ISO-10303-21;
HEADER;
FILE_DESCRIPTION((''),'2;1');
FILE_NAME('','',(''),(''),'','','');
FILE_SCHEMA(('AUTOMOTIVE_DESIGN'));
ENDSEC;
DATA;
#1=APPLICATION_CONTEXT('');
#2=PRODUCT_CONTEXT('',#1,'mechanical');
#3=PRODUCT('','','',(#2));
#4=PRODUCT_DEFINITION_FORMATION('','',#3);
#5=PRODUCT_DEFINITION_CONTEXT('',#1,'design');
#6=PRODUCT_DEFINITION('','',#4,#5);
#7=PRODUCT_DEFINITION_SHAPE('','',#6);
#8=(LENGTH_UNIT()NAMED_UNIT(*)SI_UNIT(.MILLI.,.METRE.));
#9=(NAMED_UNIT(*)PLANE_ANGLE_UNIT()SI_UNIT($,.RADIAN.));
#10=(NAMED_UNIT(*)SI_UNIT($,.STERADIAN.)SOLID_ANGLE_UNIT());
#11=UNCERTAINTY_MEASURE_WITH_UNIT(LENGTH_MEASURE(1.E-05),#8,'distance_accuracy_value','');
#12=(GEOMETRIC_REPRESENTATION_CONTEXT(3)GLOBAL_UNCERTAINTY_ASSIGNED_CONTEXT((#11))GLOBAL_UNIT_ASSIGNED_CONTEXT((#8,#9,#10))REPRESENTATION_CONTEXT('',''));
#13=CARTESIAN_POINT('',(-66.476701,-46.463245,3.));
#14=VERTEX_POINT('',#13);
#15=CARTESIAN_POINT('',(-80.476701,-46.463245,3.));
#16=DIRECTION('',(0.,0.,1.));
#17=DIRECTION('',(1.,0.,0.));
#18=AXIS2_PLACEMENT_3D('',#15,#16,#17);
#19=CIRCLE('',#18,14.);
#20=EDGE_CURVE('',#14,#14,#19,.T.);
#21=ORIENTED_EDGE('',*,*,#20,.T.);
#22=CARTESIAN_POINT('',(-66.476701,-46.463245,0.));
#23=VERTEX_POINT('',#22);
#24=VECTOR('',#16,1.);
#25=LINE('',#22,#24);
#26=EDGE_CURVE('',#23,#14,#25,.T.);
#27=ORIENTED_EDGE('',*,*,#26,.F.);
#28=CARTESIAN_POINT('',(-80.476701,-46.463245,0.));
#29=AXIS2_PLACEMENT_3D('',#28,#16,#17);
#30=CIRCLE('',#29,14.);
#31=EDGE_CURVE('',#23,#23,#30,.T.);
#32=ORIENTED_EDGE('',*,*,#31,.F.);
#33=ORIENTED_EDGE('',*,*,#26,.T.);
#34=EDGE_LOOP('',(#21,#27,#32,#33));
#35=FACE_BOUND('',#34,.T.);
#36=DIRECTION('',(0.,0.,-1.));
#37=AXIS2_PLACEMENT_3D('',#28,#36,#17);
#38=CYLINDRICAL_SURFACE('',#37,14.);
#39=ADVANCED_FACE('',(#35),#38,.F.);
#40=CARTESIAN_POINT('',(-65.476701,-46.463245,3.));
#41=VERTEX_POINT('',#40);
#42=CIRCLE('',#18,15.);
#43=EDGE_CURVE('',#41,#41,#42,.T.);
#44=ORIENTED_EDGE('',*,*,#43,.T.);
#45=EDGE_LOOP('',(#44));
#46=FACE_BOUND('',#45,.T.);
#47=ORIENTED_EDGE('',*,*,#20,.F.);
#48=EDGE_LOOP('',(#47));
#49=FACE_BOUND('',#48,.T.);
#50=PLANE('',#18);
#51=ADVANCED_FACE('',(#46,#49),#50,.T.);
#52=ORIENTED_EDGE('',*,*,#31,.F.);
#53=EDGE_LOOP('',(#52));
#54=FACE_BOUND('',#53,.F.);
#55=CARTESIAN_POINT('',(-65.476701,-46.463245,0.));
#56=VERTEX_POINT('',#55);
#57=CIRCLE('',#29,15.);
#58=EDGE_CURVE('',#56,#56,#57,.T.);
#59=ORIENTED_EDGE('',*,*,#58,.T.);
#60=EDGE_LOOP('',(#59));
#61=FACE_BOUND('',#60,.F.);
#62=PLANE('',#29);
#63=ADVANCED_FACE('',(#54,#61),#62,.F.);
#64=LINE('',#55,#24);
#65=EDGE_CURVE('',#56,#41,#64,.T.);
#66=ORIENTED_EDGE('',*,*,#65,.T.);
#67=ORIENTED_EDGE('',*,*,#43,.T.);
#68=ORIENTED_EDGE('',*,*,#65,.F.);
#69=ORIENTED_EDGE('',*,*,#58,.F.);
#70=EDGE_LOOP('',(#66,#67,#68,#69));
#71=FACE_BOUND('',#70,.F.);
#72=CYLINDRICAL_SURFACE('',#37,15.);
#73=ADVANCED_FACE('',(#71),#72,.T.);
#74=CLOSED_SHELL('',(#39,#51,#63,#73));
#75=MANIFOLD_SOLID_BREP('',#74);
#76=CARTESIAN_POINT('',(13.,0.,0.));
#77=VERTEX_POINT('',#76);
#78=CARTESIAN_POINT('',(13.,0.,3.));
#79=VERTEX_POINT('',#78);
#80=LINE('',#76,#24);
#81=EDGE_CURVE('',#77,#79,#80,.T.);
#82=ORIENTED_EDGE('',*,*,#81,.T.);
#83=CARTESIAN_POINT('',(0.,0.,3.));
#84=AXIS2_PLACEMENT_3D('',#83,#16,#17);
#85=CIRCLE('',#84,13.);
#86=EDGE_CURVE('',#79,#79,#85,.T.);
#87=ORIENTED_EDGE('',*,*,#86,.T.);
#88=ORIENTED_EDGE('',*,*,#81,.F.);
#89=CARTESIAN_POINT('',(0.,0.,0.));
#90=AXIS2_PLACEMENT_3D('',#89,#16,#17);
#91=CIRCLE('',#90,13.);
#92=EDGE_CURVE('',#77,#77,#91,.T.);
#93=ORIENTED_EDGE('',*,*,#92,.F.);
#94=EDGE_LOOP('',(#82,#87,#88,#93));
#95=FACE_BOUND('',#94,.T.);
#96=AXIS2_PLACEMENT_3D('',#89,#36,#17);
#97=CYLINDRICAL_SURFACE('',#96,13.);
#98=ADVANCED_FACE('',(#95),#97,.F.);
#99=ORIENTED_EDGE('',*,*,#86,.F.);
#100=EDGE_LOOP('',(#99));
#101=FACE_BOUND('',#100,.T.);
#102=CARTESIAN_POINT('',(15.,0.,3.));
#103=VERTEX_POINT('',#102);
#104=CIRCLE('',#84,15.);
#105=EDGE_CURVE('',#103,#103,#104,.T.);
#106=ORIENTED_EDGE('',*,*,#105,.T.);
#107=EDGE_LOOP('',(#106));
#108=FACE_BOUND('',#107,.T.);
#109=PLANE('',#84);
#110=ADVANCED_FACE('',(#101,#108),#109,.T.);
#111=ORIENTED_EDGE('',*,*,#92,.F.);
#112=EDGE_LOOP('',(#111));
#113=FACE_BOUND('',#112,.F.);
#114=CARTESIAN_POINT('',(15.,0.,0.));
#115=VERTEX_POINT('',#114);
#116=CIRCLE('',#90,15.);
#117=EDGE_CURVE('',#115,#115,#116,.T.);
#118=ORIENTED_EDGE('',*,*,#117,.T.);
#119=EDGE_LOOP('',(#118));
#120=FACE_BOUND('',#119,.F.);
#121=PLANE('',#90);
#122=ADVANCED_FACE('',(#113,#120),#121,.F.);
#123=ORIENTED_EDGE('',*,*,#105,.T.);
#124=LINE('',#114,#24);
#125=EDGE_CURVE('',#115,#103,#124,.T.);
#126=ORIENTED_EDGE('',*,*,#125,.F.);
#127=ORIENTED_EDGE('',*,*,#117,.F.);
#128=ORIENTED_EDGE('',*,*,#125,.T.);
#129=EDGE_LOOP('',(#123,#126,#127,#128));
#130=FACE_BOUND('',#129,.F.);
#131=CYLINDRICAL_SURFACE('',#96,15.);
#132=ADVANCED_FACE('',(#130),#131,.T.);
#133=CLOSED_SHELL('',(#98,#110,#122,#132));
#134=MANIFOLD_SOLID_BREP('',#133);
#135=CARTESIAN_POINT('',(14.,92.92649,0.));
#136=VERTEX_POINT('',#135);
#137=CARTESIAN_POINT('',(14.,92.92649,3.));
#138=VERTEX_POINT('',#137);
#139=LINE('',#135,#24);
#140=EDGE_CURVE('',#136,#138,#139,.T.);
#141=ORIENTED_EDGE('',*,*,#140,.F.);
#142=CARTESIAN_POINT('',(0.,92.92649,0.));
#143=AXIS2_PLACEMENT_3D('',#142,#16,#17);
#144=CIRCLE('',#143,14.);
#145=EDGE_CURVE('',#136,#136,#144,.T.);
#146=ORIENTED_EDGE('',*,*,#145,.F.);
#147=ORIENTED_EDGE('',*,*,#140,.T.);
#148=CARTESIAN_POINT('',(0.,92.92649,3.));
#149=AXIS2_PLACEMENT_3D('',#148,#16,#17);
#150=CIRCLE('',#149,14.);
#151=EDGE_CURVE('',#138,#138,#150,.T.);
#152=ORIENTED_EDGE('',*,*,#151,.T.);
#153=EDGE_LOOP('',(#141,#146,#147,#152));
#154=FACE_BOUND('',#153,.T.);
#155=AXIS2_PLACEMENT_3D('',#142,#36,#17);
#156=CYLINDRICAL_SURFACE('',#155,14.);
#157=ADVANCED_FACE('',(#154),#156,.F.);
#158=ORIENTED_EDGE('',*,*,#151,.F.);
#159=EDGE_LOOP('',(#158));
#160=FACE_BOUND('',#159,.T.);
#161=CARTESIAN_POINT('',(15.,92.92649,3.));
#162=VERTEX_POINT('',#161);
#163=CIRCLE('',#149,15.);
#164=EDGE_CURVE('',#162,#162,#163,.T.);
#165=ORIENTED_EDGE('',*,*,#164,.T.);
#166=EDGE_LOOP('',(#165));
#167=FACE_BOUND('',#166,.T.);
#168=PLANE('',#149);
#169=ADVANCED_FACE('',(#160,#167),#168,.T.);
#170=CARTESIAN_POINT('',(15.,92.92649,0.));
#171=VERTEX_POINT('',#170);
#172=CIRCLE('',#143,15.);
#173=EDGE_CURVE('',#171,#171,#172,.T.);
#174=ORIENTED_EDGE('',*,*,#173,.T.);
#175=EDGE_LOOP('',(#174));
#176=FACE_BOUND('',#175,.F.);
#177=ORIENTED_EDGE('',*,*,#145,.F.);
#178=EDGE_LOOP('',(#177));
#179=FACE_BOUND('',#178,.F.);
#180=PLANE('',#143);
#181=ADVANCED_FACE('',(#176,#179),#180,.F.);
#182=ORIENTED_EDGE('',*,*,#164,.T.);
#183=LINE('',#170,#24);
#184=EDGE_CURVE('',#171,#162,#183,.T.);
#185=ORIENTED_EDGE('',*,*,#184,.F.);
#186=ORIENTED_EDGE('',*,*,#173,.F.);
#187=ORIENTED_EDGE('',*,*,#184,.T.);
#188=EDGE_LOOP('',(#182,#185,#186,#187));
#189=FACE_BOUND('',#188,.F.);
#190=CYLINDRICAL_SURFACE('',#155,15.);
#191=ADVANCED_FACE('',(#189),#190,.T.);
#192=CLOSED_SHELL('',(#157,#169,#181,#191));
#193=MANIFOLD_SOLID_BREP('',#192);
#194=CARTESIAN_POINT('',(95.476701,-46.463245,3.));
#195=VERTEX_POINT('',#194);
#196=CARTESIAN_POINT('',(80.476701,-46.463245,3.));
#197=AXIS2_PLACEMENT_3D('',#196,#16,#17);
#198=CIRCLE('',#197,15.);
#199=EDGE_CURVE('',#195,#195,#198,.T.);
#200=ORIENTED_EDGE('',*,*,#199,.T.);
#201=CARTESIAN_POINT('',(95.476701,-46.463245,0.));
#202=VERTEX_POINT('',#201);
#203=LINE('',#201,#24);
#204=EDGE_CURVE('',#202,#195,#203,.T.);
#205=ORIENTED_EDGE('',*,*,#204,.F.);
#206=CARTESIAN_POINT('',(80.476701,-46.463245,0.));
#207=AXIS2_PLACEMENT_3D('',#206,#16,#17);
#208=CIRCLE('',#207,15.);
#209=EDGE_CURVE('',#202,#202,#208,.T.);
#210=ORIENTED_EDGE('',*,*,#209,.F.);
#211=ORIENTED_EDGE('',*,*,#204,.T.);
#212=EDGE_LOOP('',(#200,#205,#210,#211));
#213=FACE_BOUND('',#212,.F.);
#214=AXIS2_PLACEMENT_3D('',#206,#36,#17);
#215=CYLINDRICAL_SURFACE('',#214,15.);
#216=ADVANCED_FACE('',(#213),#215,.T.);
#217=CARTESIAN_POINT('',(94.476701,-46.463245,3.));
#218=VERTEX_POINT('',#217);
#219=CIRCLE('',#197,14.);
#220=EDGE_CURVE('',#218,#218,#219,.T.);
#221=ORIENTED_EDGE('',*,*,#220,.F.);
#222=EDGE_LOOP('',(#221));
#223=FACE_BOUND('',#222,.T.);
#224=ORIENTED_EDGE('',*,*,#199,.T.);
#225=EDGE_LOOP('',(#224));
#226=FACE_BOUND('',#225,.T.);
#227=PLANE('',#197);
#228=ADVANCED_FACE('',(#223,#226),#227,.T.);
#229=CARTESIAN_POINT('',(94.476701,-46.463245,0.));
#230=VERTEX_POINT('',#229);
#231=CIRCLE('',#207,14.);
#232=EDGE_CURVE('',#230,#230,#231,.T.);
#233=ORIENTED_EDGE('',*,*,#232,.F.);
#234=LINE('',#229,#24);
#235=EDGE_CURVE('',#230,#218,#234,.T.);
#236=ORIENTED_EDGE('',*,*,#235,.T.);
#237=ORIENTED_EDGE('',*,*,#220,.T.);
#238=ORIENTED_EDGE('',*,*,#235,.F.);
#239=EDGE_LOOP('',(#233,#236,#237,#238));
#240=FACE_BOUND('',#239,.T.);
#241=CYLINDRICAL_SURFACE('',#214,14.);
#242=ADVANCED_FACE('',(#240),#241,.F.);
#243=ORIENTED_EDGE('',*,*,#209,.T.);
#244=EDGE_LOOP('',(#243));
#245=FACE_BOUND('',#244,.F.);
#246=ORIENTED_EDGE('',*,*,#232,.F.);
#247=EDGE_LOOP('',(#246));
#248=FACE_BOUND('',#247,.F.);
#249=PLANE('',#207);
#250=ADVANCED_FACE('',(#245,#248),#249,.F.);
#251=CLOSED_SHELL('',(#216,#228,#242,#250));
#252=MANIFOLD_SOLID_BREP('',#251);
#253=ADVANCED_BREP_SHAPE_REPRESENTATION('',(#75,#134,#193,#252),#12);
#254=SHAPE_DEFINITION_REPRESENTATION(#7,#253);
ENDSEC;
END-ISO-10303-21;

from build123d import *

# Parameters (mm, degrees)
F0_R     = 15
F0_R_2   = 14
F1_DEPTH = 3
F0_R_3   = 13


# Not quite as in the source:
# - a feature names something its author has since deleted; it is built from what else it names


with BuildPart() as f1:
    # F0 (on Top) → F1 (new body)
    with BuildSketch(Plane.XY):
        with Locations((0, 92.926489729)):
            Circle(F0_R)
        with Locations((0, 92.926489729)):
            Circle(F0_R_2, mode=Mode.SUBTRACT)
    extrude(amount=F1_DEPTH)


with BuildPart() as f1b:
    # F0 (on Top) → F1, piece 2 (new body)
    with BuildSketch(Plane.XY):
        with Locations((80.4767007898, -46.4632448645)):
            Circle(F0_R)
        with Locations((80.4767007898, -46.4632448645)):
            Circle(F0_R_2, mode=Mode.SUBTRACT)
    extrude(amount=F1_DEPTH)


with BuildPart() as f1c:
    # F0 (on Top) → F1, piece 3 (new body)
    with BuildSketch(Plane.XY):
        Circle(F0_R)
        Circle(F0_R_3, mode=Mode.SUBTRACT)
    extrude(amount=F1_DEPTH)


with BuildPart() as f1d:
    # F0 (on Top) → F1, piece 4 (new body)
    with BuildSketch(Plane.XY):
        with Locations((-80.4767007898, -46.4632448645)):
            Circle(F0_R)
        with Locations((-80.4767007898, -46.4632448645)):
            Circle(F0_R_2, mode=Mode.SUBTRACT)
    extrude(amount=F1_DEPTH)


solid = Compound([f1.part, f1b.part, f1c.part, f1d.part])
